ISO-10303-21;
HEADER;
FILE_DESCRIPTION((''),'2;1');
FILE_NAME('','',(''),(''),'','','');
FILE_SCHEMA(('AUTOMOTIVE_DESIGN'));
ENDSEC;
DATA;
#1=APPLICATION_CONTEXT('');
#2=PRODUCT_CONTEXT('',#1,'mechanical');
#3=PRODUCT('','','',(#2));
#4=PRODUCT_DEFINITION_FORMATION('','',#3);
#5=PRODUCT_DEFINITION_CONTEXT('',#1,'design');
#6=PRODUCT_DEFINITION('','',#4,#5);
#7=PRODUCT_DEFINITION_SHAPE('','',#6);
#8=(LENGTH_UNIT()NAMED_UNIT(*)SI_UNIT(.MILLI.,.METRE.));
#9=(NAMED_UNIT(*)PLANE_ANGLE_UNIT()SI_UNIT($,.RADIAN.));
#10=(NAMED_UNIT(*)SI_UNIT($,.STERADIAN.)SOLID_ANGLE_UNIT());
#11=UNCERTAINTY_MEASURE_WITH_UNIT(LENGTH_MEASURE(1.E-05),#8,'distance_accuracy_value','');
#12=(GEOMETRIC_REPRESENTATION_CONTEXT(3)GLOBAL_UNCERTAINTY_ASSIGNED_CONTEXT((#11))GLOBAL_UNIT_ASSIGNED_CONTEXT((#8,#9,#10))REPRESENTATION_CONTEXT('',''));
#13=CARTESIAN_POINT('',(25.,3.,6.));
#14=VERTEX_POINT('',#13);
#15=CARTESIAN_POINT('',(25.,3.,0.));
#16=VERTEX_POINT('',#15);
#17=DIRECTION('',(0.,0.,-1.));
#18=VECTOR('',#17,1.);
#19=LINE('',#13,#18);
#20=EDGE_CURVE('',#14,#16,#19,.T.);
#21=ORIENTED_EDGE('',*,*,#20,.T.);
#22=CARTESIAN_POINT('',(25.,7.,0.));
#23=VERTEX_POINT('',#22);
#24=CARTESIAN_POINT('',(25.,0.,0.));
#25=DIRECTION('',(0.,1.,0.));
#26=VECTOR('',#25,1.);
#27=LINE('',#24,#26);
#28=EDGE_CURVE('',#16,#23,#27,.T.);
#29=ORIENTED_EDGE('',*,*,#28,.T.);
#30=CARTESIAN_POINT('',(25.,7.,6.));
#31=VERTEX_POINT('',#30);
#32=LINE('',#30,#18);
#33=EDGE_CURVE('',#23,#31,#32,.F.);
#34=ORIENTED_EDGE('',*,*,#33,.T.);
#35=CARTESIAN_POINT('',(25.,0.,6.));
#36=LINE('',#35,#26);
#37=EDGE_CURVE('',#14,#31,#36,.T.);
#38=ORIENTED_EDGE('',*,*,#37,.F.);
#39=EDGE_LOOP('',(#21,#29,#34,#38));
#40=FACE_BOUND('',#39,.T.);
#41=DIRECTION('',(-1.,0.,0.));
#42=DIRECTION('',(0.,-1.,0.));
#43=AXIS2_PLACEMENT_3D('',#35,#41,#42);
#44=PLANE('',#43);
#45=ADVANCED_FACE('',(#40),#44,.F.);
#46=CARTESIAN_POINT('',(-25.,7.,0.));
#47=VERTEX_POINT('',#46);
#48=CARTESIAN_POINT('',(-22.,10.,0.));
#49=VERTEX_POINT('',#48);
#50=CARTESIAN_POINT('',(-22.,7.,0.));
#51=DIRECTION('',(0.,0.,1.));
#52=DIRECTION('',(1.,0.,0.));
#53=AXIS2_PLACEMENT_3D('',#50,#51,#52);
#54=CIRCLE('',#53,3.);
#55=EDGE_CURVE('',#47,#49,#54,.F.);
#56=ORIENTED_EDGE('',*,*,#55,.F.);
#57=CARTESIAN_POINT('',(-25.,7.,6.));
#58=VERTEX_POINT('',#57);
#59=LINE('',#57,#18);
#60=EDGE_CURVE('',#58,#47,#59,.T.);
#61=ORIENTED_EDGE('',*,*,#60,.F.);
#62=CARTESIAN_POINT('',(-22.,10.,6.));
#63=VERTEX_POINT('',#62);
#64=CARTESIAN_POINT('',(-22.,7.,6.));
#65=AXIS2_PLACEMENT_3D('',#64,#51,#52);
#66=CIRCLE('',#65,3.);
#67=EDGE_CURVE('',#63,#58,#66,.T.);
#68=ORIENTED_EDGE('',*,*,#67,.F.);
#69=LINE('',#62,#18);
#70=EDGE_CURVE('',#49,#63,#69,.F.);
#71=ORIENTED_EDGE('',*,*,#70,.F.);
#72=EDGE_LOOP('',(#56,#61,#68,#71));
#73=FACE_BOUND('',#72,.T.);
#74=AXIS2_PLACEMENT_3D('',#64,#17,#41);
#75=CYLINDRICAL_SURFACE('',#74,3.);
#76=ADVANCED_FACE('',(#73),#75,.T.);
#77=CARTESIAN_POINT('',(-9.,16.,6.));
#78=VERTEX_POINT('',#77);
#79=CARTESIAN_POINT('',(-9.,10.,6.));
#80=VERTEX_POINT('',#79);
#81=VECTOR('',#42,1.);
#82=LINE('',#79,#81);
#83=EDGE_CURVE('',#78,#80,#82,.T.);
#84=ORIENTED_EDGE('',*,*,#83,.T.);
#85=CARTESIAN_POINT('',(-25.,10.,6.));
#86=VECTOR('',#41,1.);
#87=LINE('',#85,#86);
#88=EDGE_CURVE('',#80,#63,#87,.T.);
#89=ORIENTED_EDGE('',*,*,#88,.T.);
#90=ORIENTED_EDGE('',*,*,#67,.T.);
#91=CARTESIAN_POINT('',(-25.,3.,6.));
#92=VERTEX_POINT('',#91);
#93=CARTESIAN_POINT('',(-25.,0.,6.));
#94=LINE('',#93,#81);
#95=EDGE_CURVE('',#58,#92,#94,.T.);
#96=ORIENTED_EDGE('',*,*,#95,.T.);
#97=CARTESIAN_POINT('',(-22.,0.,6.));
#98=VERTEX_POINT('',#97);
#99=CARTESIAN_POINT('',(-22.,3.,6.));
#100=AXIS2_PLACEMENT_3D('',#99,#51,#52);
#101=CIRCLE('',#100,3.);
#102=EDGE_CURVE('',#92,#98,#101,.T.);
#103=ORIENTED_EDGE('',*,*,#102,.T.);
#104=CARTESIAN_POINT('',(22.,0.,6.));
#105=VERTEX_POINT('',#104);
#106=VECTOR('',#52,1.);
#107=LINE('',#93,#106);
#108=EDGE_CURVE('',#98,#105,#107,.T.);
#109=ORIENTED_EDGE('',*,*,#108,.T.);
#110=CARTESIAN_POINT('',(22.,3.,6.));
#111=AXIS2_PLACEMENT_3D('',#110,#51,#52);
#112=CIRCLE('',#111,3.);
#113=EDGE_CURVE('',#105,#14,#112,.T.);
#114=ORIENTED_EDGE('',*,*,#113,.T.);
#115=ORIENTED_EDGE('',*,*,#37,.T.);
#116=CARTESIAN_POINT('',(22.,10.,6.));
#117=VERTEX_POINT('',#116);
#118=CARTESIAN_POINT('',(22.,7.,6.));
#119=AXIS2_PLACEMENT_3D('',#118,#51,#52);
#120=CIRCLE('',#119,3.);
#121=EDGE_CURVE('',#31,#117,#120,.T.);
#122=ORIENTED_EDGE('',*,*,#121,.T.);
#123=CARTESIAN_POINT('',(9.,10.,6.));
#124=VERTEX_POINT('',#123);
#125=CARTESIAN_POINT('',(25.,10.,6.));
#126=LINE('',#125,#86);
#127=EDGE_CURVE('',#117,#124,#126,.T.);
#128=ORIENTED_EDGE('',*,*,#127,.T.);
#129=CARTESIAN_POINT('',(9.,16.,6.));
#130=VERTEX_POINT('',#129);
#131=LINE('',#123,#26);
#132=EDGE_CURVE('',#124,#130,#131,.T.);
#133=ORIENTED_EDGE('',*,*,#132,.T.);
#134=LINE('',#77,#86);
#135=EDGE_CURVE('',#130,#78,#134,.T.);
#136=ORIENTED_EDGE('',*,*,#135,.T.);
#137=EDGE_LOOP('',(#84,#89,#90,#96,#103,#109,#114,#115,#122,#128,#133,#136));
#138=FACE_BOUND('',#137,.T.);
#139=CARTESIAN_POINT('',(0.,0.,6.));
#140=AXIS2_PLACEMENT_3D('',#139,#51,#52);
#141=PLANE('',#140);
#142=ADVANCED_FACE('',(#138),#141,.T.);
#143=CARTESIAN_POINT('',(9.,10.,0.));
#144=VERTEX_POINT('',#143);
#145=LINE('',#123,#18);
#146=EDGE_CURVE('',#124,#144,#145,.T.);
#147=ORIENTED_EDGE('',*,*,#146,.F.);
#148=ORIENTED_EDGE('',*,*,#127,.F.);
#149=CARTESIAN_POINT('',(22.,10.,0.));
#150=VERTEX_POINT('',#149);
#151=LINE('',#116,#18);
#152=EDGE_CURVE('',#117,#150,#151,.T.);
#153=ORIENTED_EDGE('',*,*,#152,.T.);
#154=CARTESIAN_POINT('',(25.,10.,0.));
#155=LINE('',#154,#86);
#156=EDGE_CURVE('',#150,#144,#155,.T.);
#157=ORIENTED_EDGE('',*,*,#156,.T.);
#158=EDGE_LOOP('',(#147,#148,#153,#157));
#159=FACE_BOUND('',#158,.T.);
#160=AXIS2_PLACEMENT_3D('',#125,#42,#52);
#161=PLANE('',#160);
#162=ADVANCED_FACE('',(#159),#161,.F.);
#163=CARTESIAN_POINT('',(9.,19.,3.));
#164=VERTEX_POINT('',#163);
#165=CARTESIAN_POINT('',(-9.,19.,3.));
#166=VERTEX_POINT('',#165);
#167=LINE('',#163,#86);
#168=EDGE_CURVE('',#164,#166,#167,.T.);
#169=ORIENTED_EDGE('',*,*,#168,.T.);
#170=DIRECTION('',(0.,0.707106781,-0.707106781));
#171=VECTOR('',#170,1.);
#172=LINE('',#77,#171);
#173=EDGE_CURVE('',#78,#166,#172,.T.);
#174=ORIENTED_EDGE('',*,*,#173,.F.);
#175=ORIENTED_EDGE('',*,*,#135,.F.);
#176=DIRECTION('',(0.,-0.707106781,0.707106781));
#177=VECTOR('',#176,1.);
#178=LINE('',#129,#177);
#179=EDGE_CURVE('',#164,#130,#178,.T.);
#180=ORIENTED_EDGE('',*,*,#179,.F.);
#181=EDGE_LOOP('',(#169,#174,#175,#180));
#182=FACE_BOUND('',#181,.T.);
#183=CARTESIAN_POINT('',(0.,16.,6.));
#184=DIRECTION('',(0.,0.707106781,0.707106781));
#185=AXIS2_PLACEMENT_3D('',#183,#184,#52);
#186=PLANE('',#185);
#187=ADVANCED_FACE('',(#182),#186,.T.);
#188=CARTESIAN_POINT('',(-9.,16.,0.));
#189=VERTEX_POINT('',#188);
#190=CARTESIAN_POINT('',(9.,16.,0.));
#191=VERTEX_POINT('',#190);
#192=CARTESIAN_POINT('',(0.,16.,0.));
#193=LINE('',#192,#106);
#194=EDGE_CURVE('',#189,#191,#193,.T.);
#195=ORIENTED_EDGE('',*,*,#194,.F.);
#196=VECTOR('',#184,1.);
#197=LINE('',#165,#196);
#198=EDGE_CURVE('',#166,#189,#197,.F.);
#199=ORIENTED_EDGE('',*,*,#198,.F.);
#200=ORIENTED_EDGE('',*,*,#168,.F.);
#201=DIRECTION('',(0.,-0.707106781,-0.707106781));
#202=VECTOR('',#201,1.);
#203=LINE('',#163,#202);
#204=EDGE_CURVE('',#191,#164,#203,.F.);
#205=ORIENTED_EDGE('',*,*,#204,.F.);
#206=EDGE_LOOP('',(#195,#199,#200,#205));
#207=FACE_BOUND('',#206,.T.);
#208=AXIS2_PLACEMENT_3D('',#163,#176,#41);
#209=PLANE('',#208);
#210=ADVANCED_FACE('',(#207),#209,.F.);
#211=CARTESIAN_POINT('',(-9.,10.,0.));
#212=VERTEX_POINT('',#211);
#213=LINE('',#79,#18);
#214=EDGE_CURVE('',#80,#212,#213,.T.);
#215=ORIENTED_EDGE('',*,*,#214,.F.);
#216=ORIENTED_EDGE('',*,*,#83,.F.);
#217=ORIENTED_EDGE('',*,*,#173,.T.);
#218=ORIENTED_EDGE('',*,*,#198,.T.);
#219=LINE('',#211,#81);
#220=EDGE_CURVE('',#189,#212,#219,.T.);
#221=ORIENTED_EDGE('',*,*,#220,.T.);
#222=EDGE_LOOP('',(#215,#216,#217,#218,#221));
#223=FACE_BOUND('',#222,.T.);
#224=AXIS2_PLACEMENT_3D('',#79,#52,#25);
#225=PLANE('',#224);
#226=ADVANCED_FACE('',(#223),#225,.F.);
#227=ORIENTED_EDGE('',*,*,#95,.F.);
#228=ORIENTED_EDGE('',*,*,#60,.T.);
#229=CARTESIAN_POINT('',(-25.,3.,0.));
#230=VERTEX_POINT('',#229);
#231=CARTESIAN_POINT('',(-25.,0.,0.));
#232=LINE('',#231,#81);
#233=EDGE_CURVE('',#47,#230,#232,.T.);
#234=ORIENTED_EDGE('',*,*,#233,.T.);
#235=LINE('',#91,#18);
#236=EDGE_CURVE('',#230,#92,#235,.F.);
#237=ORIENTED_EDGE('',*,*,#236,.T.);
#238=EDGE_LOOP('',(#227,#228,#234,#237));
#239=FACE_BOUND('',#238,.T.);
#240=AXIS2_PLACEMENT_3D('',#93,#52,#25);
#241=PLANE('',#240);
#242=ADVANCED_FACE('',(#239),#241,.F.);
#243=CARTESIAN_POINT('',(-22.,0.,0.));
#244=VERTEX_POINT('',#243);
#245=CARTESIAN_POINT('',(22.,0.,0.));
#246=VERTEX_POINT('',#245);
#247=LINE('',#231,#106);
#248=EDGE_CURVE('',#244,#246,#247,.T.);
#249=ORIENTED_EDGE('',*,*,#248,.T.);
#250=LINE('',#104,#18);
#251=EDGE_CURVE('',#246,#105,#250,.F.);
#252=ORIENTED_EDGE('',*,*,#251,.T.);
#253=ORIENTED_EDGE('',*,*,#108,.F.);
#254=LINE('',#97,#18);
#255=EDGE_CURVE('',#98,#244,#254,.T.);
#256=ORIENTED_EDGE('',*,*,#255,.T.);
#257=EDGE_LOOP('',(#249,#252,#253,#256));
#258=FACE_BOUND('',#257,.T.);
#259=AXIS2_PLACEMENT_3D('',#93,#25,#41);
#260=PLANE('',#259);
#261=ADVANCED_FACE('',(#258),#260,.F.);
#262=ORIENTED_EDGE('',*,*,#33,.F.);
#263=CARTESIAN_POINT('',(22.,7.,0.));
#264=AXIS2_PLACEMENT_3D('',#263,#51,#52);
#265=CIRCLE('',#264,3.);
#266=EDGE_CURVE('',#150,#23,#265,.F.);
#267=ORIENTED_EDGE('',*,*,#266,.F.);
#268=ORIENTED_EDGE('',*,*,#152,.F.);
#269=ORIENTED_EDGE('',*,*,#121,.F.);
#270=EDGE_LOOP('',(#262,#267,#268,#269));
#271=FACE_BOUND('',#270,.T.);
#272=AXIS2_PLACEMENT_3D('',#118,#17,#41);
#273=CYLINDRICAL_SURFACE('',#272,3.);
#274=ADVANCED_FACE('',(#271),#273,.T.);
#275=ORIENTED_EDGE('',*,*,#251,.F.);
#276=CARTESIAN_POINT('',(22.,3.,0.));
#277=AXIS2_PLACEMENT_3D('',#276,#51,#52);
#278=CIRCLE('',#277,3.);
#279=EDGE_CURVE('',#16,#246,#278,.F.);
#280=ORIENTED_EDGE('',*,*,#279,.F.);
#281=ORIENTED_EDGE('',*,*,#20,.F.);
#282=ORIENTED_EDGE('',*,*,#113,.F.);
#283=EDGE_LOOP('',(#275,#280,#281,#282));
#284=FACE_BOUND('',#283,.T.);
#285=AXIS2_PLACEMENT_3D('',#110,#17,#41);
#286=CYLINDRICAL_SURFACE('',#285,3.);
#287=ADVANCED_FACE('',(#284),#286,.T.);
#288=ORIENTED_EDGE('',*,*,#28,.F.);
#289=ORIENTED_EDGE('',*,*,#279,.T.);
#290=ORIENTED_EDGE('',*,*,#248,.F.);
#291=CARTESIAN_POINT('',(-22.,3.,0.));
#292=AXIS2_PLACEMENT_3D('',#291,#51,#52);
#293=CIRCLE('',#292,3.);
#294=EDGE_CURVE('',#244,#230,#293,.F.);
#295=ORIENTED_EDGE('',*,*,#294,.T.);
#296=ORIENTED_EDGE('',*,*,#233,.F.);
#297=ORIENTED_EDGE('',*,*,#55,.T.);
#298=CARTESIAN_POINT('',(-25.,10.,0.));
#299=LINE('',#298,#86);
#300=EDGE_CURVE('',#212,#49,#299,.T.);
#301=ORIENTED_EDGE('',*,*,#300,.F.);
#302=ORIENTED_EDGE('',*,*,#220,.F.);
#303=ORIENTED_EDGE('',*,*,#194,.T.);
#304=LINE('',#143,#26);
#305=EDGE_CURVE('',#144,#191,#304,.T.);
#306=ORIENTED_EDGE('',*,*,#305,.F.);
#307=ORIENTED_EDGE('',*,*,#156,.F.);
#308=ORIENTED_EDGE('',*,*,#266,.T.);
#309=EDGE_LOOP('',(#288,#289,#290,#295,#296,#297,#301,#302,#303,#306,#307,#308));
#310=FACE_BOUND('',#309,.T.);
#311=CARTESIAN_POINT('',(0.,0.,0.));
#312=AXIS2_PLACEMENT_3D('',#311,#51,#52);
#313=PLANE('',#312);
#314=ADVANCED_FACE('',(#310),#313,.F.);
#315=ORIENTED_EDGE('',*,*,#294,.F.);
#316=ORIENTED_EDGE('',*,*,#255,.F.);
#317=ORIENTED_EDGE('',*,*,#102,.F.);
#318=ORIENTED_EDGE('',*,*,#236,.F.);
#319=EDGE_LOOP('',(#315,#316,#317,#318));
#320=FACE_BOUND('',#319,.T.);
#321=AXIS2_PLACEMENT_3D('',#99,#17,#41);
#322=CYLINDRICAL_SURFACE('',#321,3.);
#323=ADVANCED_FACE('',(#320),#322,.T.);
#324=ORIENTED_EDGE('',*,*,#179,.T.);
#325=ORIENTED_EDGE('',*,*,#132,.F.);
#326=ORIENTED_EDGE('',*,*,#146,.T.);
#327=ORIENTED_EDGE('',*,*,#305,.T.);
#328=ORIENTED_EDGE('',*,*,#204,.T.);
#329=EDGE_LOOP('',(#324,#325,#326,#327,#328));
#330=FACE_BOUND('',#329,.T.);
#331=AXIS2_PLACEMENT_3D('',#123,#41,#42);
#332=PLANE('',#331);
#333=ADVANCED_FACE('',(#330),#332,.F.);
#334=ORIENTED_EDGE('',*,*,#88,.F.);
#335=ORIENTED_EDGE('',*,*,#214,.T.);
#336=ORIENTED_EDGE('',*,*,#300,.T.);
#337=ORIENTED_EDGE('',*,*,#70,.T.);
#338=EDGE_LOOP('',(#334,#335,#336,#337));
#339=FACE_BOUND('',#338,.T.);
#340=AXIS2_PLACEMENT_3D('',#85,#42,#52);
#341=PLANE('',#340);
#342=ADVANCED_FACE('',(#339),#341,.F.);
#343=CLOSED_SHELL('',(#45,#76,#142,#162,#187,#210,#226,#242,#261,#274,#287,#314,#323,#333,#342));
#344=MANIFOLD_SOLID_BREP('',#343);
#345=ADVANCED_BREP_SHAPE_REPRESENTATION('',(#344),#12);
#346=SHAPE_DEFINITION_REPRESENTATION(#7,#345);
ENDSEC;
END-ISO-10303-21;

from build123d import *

# Parameters (mm, degrees)
EXTRUDE_1_DEPTH = 6
FILLET_1_R      = 3
CHAMFER_1_SIZE  = 3


with BuildPart() as part:
    # 草图1 → 凸台-拉伸1 (new body)
    with BuildSketch(Plane.XY):
        Polygon((-25, 0), (25, 0), (25, 10), (9, 10), (9, 19), (-9, 19), (-9, 10), (-25, 10), align=None)
    extrude(amount=EXTRUDE_1_DEPTH)

    # 圆角1
    fillet_1_edges = [part.edges().sort_by_distance(p)[0] for p in [
        (25, 10, 3),
        (25, 0, 3),
        (-25, 0, 3),
        (-25, 10, 3),
    ]]
    fillet(fillet_1_edges, radius=FILLET_1_R)

    # 倒角1
    chamfer_1_edges = [part.edges().sort_by_distance(p)[0] for p in [
        (0, 19, 6),
        (0, 19, 0),
    ]]
    chamfer(chamfer_1_edges, length=CHAMFER_1_SIZE - 0.0001)  # a hair under: the kernel refuses the full size


solid = part.part
